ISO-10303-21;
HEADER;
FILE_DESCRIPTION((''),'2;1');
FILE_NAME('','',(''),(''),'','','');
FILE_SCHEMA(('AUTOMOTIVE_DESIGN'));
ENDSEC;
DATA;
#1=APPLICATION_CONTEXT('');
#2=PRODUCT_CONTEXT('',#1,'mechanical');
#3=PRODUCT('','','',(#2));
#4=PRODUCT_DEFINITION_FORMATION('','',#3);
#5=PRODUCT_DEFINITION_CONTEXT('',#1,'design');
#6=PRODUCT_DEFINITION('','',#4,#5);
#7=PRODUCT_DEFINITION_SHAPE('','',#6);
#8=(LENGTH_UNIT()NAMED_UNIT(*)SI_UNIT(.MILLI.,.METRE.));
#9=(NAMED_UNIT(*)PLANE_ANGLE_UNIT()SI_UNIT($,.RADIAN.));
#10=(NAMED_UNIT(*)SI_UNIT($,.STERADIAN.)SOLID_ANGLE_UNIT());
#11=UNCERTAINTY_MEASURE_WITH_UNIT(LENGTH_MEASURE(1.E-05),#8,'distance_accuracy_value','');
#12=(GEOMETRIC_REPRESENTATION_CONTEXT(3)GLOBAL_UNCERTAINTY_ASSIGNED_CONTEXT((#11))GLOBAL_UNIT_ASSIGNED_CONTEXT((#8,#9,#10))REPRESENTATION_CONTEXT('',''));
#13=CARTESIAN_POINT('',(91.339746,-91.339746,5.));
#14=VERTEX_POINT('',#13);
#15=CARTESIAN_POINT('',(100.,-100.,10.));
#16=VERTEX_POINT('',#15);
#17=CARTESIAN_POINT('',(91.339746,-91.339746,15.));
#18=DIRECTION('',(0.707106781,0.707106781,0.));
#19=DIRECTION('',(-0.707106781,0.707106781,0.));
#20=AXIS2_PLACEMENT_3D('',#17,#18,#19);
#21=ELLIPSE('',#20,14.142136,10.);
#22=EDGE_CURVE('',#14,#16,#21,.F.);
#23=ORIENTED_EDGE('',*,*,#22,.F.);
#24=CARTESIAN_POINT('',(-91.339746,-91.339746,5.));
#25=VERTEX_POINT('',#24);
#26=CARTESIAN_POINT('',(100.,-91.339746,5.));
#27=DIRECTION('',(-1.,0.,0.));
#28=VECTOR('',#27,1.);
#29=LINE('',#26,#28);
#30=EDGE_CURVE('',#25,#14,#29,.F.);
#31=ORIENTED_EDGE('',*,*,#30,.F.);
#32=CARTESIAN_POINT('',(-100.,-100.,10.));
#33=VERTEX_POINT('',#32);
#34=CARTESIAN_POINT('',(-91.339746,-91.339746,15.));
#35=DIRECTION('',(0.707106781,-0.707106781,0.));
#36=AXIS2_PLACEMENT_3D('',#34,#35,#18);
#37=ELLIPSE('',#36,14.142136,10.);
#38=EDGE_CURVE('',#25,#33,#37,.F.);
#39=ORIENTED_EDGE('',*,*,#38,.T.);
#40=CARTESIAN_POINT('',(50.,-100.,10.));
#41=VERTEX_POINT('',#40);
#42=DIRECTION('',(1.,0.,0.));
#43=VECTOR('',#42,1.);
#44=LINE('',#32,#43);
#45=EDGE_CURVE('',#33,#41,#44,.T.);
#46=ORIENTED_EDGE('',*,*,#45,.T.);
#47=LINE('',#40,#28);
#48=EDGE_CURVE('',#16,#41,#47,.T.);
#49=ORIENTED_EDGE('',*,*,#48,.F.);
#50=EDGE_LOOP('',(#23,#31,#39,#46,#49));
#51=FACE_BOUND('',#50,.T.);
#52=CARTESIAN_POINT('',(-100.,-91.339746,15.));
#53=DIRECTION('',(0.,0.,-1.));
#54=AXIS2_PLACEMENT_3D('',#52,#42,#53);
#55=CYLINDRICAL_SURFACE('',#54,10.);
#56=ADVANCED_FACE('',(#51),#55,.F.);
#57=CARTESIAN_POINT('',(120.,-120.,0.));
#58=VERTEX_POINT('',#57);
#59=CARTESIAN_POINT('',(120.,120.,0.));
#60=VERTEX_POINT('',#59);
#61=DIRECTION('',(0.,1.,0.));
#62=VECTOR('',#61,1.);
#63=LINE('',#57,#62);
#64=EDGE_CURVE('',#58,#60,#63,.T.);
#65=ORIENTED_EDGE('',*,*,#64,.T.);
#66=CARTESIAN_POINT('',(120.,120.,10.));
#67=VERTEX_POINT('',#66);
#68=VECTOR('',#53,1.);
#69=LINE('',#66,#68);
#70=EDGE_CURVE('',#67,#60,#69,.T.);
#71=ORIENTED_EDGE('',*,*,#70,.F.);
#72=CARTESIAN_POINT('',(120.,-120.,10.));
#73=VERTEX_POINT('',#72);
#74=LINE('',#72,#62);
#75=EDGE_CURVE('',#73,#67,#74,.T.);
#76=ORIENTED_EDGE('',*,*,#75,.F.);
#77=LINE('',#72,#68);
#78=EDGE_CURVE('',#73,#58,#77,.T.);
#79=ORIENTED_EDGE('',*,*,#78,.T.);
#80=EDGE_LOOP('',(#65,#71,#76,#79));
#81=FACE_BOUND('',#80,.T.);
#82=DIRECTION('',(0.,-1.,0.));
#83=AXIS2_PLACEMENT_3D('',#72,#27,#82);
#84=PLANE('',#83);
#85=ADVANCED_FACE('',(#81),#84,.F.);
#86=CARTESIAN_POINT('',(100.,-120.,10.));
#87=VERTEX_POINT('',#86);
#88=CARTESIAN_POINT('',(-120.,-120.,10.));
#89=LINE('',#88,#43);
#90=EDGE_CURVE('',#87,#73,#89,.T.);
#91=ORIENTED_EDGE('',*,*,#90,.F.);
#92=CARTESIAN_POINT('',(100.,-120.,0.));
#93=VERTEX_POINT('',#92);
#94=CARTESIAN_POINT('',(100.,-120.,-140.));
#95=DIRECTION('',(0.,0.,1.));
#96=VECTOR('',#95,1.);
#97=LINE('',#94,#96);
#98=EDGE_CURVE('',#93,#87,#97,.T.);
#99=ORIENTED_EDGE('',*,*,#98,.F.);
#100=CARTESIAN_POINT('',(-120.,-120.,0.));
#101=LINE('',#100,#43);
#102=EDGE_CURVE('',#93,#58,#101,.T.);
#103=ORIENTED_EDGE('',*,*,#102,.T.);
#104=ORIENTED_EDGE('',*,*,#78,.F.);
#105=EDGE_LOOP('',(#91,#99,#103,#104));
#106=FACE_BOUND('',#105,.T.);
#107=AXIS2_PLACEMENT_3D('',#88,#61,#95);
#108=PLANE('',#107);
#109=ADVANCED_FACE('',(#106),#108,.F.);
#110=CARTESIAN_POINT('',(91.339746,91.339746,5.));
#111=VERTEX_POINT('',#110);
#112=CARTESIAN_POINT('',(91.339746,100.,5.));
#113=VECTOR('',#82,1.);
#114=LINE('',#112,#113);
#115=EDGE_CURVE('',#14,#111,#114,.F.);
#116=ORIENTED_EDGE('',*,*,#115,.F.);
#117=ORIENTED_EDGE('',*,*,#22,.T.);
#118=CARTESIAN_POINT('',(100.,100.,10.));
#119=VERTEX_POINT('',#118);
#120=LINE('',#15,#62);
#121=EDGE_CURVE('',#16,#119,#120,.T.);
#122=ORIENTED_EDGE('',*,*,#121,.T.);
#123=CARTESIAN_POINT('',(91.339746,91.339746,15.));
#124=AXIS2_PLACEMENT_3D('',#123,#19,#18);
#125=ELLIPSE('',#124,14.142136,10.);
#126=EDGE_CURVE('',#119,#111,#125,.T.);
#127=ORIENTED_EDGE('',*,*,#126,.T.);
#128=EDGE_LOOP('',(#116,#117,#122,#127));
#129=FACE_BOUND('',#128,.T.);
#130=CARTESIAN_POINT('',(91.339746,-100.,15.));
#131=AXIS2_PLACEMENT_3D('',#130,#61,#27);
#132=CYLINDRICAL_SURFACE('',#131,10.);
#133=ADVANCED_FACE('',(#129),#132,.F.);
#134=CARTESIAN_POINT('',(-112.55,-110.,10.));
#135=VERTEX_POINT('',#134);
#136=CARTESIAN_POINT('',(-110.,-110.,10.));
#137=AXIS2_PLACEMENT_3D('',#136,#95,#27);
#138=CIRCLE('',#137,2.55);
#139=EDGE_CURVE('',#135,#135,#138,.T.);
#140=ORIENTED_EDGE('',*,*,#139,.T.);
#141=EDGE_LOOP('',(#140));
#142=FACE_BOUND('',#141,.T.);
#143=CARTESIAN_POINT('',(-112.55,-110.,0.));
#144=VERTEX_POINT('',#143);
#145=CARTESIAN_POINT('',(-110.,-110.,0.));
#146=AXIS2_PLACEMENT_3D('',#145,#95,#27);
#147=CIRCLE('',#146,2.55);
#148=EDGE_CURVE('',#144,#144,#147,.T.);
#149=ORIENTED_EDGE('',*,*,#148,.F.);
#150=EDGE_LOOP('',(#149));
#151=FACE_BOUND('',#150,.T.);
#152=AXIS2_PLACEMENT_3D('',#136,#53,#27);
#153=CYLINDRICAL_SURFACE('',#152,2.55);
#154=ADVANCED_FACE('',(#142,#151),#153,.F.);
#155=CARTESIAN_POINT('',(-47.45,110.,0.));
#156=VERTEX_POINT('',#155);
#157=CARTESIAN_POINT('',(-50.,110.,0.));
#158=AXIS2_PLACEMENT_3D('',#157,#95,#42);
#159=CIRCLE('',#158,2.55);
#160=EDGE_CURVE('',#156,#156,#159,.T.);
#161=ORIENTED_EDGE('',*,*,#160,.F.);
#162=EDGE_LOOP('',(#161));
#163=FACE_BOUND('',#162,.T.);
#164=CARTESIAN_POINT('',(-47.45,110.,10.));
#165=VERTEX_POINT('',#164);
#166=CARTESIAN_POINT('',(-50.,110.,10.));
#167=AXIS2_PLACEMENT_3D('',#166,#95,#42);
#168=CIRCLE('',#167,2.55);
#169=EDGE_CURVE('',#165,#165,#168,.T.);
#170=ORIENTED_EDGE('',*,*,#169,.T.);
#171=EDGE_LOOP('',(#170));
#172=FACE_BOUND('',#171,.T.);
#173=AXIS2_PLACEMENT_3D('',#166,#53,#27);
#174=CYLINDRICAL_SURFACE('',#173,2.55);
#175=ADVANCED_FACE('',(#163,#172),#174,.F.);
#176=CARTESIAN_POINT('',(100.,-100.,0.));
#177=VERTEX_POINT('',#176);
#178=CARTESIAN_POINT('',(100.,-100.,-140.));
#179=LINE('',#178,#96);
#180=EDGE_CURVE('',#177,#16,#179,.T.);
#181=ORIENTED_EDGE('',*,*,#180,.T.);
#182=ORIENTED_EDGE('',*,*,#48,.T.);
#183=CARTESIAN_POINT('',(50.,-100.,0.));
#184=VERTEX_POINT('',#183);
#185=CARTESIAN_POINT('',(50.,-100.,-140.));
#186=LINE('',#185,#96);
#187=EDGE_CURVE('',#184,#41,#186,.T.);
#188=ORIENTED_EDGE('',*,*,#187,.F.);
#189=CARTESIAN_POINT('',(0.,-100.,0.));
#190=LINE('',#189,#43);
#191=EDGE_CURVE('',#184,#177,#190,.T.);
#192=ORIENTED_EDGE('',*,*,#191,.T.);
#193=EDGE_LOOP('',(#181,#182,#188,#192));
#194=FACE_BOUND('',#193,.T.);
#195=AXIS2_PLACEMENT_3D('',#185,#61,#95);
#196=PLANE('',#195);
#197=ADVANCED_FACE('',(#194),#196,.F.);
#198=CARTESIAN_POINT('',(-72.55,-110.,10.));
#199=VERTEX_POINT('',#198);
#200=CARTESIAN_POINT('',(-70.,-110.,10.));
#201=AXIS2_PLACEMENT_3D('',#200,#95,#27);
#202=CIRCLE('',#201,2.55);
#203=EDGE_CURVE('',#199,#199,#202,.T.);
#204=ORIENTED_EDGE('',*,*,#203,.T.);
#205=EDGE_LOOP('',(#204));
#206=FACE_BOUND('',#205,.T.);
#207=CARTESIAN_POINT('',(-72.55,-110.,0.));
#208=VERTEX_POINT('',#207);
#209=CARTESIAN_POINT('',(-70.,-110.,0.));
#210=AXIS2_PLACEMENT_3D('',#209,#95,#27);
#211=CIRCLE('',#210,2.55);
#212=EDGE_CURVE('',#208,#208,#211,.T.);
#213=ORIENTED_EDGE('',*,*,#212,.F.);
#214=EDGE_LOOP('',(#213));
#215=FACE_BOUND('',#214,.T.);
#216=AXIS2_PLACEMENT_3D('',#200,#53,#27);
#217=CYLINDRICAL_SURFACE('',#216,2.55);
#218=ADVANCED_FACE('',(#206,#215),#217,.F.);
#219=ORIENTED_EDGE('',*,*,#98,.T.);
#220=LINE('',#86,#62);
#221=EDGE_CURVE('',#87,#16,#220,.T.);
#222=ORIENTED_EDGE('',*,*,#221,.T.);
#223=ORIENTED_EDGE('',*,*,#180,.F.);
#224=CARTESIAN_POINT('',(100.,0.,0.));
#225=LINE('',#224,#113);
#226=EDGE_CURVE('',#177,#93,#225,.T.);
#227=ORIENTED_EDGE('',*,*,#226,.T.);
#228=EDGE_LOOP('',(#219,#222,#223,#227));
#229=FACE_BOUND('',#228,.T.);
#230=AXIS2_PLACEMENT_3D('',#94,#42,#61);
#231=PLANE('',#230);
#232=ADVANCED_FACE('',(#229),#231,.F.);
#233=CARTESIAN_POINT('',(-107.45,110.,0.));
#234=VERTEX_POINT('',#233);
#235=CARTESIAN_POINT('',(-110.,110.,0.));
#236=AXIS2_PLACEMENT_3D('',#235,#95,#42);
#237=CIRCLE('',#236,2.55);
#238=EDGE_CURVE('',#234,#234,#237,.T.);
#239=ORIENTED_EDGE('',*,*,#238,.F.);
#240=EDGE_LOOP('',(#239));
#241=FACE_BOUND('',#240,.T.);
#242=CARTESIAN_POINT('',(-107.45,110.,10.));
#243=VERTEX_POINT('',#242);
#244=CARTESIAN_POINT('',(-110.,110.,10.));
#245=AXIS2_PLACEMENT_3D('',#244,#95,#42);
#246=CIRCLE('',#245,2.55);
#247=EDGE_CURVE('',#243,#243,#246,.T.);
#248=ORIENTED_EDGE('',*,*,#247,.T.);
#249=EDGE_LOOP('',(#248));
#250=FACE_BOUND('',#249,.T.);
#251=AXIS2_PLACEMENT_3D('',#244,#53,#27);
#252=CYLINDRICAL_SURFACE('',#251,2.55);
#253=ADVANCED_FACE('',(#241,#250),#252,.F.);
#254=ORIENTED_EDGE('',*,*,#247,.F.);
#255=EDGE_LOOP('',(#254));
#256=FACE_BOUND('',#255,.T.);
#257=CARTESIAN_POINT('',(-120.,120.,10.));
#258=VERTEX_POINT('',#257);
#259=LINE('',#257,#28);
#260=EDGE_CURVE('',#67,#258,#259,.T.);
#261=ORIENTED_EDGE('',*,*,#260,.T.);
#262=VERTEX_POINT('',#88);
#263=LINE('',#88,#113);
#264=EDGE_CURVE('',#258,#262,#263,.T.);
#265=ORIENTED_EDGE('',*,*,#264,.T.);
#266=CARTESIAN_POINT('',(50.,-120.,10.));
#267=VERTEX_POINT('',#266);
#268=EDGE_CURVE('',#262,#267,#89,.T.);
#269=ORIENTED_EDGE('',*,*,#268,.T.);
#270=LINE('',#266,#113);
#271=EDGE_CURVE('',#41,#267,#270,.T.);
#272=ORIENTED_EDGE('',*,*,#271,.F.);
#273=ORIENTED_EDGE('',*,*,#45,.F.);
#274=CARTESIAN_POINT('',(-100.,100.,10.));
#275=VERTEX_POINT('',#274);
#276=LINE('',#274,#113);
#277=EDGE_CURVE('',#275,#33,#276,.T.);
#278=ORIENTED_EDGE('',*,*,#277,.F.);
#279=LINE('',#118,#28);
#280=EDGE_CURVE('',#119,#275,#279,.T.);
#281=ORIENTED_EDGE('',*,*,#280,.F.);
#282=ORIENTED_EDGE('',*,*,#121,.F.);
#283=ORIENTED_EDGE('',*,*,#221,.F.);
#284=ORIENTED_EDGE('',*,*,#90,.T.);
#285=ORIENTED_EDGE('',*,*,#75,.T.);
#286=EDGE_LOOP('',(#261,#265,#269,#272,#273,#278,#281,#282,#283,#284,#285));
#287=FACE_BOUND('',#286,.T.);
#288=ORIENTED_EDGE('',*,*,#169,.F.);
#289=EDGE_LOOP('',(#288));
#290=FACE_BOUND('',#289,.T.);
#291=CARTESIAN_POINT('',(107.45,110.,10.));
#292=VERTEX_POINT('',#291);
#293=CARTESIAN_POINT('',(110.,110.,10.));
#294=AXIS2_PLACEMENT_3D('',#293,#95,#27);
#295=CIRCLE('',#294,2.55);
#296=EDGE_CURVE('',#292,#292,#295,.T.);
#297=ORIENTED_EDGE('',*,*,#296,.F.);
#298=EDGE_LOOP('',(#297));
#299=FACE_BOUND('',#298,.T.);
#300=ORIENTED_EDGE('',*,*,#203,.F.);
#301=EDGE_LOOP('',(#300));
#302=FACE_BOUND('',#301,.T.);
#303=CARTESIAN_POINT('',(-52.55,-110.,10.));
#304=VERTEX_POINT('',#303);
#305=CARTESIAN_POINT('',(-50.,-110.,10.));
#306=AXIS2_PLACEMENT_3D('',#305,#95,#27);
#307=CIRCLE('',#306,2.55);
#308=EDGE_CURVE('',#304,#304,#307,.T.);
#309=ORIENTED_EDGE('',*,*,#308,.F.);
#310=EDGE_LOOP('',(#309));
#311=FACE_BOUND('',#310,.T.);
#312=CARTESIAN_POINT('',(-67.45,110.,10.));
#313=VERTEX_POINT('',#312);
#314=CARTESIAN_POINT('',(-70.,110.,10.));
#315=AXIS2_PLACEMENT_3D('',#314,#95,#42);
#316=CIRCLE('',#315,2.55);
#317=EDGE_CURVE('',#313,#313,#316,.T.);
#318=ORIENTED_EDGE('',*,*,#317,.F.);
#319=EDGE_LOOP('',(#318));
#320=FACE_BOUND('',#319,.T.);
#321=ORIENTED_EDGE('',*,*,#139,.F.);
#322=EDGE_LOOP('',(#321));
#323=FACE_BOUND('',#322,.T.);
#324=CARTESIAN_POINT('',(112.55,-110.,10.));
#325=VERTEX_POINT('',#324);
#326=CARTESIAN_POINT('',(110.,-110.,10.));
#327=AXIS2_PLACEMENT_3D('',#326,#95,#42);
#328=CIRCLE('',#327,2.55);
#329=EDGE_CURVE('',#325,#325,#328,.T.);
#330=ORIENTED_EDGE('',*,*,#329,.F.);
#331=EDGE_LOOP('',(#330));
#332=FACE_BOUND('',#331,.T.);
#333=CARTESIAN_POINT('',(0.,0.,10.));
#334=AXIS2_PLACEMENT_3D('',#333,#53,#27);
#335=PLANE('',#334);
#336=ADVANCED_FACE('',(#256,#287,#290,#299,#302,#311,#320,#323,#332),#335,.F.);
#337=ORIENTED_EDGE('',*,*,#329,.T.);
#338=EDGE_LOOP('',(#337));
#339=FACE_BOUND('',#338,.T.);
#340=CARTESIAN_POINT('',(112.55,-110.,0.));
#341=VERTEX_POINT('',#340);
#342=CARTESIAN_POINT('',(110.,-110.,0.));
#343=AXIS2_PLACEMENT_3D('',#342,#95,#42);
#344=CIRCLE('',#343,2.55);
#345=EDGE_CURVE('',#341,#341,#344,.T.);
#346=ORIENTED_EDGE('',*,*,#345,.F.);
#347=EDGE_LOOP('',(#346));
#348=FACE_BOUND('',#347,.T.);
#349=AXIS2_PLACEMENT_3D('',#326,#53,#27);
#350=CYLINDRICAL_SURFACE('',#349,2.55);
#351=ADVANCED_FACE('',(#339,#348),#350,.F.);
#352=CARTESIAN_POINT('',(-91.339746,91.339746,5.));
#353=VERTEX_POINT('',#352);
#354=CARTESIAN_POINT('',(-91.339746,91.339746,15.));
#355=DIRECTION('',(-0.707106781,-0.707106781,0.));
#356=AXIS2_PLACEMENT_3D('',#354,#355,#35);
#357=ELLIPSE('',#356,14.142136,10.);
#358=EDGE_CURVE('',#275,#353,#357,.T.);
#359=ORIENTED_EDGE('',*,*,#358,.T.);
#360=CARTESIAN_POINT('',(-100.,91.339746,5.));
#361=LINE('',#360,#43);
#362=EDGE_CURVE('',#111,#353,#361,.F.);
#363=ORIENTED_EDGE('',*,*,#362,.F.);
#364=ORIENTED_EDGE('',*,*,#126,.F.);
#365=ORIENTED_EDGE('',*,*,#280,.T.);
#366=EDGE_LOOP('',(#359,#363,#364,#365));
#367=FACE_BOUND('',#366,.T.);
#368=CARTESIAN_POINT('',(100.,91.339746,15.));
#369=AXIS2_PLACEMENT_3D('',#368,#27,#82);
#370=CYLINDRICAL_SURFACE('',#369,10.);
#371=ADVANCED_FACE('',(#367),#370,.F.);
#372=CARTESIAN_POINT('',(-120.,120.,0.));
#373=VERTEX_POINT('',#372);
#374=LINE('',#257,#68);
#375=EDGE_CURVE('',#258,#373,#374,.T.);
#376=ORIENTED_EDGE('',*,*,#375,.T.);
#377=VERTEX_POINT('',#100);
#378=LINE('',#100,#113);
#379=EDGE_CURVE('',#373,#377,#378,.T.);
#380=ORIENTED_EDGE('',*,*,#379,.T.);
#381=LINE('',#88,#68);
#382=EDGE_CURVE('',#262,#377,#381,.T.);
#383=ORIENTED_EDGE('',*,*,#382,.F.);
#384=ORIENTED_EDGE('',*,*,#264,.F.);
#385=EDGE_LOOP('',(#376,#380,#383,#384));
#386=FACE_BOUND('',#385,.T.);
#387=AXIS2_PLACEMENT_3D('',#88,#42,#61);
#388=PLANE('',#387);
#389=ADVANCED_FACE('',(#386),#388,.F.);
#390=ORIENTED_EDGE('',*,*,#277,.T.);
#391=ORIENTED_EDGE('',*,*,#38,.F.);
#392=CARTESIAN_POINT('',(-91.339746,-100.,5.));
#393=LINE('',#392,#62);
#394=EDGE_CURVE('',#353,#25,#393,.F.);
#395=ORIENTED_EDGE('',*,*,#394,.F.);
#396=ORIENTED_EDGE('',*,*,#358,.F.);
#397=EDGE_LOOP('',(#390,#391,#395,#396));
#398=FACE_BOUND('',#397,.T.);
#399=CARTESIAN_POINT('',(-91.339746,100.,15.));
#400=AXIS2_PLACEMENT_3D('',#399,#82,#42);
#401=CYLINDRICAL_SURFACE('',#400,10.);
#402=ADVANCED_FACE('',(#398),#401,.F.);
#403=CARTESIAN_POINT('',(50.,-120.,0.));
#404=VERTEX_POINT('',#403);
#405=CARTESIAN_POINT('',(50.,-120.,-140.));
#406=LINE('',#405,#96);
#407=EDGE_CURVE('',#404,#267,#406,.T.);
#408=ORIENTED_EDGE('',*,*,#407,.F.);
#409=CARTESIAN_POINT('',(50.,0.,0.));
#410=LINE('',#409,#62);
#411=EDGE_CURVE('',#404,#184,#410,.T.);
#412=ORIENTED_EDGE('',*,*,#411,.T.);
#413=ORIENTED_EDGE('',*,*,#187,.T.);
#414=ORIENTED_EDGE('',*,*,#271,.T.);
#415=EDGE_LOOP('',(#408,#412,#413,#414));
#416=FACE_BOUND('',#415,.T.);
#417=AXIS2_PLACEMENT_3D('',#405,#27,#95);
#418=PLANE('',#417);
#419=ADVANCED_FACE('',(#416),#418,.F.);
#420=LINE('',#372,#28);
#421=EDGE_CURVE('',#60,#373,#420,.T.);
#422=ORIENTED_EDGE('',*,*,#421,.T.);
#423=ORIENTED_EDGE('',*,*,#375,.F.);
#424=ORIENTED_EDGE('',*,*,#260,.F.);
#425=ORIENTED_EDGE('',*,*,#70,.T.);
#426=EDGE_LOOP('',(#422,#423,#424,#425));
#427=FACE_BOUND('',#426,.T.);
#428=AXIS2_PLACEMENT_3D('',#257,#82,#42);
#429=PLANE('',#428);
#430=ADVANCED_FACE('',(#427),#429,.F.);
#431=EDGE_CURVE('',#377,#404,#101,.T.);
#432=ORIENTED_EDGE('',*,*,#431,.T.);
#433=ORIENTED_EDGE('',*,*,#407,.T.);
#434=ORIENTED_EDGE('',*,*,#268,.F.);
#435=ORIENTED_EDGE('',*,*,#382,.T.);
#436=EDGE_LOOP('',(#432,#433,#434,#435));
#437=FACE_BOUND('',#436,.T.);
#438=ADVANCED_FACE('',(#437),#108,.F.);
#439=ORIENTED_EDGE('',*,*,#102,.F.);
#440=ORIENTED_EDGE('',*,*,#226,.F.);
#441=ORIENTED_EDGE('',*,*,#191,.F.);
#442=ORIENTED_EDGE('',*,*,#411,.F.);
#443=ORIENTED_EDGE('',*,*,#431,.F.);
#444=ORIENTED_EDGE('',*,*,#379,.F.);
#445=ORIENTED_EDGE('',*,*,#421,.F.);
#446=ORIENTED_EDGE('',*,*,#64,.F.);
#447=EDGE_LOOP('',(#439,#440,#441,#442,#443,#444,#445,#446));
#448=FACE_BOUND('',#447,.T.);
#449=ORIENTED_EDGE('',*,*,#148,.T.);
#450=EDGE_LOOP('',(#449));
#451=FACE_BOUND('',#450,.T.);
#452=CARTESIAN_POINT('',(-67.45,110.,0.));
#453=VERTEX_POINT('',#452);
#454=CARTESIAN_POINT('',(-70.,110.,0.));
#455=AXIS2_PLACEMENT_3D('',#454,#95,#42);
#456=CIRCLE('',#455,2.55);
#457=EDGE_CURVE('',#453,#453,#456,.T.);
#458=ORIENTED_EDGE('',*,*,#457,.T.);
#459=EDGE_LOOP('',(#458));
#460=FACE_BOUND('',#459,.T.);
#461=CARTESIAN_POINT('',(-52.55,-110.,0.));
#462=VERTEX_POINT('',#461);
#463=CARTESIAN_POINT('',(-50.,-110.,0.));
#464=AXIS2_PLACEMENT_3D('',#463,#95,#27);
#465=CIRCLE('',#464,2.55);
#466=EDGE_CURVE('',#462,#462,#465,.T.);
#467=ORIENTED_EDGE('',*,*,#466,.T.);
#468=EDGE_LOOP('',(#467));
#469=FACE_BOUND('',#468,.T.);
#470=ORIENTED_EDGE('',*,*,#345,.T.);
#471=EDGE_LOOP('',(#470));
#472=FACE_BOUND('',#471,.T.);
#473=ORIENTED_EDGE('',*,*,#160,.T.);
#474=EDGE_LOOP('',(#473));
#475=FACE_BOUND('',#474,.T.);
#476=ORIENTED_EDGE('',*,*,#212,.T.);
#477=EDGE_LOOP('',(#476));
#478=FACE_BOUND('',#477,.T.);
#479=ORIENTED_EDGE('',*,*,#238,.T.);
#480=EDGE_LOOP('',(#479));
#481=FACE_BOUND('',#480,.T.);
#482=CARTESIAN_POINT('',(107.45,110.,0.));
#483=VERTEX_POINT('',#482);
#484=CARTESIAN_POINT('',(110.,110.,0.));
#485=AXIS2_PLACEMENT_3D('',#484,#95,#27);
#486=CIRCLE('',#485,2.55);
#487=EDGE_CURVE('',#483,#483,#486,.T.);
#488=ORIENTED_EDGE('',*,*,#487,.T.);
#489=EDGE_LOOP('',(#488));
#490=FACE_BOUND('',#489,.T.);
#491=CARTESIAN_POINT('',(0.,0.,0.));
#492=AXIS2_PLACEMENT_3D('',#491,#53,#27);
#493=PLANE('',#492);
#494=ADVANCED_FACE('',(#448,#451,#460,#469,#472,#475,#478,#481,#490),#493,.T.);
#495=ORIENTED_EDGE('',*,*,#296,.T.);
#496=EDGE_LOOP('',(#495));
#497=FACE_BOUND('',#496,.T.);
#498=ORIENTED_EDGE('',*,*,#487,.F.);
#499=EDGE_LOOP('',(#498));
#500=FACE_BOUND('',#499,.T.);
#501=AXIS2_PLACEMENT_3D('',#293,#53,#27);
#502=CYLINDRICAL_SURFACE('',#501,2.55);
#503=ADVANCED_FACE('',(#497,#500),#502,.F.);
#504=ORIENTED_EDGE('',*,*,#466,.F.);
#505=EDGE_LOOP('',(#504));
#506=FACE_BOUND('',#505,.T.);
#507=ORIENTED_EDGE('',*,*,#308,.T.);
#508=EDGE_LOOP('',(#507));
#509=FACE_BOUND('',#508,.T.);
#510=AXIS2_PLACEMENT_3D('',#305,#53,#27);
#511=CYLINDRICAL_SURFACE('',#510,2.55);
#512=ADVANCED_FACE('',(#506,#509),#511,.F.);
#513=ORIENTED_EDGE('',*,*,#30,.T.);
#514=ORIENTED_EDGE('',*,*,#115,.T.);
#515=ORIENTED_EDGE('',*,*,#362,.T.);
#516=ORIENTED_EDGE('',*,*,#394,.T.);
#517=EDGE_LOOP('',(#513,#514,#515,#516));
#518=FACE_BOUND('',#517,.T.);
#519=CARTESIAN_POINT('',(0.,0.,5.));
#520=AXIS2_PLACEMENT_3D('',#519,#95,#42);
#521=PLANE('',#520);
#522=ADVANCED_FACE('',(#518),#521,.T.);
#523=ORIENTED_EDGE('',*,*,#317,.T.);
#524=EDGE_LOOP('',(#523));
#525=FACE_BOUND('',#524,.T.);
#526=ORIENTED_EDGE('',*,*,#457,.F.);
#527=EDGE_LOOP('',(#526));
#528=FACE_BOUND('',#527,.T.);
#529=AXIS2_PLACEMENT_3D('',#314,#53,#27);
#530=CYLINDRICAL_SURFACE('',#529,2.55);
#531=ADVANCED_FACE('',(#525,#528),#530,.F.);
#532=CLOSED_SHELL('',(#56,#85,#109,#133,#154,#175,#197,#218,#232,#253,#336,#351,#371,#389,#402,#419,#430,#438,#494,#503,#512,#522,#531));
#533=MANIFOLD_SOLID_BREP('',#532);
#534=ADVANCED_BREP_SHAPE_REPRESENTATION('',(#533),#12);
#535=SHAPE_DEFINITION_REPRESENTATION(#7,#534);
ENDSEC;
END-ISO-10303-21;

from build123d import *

# Parameters (mm, degrees)
SKETCH1_W           = 240
SKETCH1_H           = 240
SKETCH1_R           = 2.55
BOSS_EXTRUDE1_DEPTH = 10
SKETCH2_W           = 200
SKETCH2_H           = 200
CUT_EXTRUDE1_DEPTH  = 5
FILLET1_R           = 10
SKETCH3_W           = 50
SKETCH3_H           = 20
CUT_EXTRUDE2_DEPTH  = 150


with BuildPart() as part:
    # Sketch1 → Boss-Extrude1 (new body)
    with BuildSketch(Plane.XY):
        Rectangle(SKETCH1_W, SKETCH1_H)
        with Locations((-110, 110)):
            Circle(SKETCH1_R, mode=Mode.SUBTRACT)
        with Locations(Location((110, 110, 0), (0, 0, 180))):
            Circle(SKETCH1_R, mode=Mode.SUBTRACT)
        with Locations((110, -110)):
            Circle(SKETCH1_R, mode=Mode.SUBTRACT)
        with Locations(Location((-110, -110, 0), (0, 0, 180))):
            Circle(SKETCH1_R, mode=Mode.SUBTRACT)
        with Locations((-70, 110)):
            Circle(SKETCH1_R, mode=Mode.SUBTRACT)
        with Locations(Location((-70, -110, 0), (0, 0, 180))):
            Circle(SKETCH1_R, mode=Mode.SUBTRACT)
        with Locations((-50, 110)):
            Circle(SKETCH1_R, mode=Mode.SUBTRACT)
        with Locations(Location((-50, -110, 0), (0, 0, 180))):
            Circle(SKETCH1_R, mode=Mode.SUBTRACT)
    extrude(amount=BOSS_EXTRUDE1_DEPTH)

    # Sketch2 → Cut-Extrude1 (cut)
    with BuildSketch(Plane.XY.offset(10)):
        Rectangle(SKETCH2_W, SKETCH2_H)
    extrude(amount=-CUT_EXTRUDE1_DEPTH, mode=Mode.SUBTRACT)

    # Fillet1
    # the kernel refuses this fillet: 10 mm, written as the material it adds along each edge
    with BuildSketch(Plane(origin=(100, -100, 5), x_dir=(0, 0, 1), z_dir=(0, 1, 0)), Plane(origin=(-100, -100, 5), x_dir=(0, 0, 1), z_dir=(1, 0, 0)), Plane(origin=(-100, 100, 5), x_dir=(0, 0, 1), z_dir=(0, -1, 0)), Plane(origin=(100, 100, 5), x_dir=(0, 0, 1), z_dir=(-1, 0, 0))) as fillet1_piece_1:
        with BuildLine():
            CenterArc((10, -8.660254038), FILLET1_R, 120, 60)
            Line((0, -8.660254038), (0, 0))
            Line((0, 0), (5, 0))
        make_face()
    extrude(amount=200)

    # Sketch3 → Cut-Extrude2 (cut)
    with BuildSketch(Plane.XY.offset(10)):
        with Locations((75, -110)):
            Rectangle(SKETCH3_W, SKETCH3_H)
    extrude(amount=-CUT_EXTRUDE2_DEPTH, mode=Mode.SUBTRACT)


solid = part.part
